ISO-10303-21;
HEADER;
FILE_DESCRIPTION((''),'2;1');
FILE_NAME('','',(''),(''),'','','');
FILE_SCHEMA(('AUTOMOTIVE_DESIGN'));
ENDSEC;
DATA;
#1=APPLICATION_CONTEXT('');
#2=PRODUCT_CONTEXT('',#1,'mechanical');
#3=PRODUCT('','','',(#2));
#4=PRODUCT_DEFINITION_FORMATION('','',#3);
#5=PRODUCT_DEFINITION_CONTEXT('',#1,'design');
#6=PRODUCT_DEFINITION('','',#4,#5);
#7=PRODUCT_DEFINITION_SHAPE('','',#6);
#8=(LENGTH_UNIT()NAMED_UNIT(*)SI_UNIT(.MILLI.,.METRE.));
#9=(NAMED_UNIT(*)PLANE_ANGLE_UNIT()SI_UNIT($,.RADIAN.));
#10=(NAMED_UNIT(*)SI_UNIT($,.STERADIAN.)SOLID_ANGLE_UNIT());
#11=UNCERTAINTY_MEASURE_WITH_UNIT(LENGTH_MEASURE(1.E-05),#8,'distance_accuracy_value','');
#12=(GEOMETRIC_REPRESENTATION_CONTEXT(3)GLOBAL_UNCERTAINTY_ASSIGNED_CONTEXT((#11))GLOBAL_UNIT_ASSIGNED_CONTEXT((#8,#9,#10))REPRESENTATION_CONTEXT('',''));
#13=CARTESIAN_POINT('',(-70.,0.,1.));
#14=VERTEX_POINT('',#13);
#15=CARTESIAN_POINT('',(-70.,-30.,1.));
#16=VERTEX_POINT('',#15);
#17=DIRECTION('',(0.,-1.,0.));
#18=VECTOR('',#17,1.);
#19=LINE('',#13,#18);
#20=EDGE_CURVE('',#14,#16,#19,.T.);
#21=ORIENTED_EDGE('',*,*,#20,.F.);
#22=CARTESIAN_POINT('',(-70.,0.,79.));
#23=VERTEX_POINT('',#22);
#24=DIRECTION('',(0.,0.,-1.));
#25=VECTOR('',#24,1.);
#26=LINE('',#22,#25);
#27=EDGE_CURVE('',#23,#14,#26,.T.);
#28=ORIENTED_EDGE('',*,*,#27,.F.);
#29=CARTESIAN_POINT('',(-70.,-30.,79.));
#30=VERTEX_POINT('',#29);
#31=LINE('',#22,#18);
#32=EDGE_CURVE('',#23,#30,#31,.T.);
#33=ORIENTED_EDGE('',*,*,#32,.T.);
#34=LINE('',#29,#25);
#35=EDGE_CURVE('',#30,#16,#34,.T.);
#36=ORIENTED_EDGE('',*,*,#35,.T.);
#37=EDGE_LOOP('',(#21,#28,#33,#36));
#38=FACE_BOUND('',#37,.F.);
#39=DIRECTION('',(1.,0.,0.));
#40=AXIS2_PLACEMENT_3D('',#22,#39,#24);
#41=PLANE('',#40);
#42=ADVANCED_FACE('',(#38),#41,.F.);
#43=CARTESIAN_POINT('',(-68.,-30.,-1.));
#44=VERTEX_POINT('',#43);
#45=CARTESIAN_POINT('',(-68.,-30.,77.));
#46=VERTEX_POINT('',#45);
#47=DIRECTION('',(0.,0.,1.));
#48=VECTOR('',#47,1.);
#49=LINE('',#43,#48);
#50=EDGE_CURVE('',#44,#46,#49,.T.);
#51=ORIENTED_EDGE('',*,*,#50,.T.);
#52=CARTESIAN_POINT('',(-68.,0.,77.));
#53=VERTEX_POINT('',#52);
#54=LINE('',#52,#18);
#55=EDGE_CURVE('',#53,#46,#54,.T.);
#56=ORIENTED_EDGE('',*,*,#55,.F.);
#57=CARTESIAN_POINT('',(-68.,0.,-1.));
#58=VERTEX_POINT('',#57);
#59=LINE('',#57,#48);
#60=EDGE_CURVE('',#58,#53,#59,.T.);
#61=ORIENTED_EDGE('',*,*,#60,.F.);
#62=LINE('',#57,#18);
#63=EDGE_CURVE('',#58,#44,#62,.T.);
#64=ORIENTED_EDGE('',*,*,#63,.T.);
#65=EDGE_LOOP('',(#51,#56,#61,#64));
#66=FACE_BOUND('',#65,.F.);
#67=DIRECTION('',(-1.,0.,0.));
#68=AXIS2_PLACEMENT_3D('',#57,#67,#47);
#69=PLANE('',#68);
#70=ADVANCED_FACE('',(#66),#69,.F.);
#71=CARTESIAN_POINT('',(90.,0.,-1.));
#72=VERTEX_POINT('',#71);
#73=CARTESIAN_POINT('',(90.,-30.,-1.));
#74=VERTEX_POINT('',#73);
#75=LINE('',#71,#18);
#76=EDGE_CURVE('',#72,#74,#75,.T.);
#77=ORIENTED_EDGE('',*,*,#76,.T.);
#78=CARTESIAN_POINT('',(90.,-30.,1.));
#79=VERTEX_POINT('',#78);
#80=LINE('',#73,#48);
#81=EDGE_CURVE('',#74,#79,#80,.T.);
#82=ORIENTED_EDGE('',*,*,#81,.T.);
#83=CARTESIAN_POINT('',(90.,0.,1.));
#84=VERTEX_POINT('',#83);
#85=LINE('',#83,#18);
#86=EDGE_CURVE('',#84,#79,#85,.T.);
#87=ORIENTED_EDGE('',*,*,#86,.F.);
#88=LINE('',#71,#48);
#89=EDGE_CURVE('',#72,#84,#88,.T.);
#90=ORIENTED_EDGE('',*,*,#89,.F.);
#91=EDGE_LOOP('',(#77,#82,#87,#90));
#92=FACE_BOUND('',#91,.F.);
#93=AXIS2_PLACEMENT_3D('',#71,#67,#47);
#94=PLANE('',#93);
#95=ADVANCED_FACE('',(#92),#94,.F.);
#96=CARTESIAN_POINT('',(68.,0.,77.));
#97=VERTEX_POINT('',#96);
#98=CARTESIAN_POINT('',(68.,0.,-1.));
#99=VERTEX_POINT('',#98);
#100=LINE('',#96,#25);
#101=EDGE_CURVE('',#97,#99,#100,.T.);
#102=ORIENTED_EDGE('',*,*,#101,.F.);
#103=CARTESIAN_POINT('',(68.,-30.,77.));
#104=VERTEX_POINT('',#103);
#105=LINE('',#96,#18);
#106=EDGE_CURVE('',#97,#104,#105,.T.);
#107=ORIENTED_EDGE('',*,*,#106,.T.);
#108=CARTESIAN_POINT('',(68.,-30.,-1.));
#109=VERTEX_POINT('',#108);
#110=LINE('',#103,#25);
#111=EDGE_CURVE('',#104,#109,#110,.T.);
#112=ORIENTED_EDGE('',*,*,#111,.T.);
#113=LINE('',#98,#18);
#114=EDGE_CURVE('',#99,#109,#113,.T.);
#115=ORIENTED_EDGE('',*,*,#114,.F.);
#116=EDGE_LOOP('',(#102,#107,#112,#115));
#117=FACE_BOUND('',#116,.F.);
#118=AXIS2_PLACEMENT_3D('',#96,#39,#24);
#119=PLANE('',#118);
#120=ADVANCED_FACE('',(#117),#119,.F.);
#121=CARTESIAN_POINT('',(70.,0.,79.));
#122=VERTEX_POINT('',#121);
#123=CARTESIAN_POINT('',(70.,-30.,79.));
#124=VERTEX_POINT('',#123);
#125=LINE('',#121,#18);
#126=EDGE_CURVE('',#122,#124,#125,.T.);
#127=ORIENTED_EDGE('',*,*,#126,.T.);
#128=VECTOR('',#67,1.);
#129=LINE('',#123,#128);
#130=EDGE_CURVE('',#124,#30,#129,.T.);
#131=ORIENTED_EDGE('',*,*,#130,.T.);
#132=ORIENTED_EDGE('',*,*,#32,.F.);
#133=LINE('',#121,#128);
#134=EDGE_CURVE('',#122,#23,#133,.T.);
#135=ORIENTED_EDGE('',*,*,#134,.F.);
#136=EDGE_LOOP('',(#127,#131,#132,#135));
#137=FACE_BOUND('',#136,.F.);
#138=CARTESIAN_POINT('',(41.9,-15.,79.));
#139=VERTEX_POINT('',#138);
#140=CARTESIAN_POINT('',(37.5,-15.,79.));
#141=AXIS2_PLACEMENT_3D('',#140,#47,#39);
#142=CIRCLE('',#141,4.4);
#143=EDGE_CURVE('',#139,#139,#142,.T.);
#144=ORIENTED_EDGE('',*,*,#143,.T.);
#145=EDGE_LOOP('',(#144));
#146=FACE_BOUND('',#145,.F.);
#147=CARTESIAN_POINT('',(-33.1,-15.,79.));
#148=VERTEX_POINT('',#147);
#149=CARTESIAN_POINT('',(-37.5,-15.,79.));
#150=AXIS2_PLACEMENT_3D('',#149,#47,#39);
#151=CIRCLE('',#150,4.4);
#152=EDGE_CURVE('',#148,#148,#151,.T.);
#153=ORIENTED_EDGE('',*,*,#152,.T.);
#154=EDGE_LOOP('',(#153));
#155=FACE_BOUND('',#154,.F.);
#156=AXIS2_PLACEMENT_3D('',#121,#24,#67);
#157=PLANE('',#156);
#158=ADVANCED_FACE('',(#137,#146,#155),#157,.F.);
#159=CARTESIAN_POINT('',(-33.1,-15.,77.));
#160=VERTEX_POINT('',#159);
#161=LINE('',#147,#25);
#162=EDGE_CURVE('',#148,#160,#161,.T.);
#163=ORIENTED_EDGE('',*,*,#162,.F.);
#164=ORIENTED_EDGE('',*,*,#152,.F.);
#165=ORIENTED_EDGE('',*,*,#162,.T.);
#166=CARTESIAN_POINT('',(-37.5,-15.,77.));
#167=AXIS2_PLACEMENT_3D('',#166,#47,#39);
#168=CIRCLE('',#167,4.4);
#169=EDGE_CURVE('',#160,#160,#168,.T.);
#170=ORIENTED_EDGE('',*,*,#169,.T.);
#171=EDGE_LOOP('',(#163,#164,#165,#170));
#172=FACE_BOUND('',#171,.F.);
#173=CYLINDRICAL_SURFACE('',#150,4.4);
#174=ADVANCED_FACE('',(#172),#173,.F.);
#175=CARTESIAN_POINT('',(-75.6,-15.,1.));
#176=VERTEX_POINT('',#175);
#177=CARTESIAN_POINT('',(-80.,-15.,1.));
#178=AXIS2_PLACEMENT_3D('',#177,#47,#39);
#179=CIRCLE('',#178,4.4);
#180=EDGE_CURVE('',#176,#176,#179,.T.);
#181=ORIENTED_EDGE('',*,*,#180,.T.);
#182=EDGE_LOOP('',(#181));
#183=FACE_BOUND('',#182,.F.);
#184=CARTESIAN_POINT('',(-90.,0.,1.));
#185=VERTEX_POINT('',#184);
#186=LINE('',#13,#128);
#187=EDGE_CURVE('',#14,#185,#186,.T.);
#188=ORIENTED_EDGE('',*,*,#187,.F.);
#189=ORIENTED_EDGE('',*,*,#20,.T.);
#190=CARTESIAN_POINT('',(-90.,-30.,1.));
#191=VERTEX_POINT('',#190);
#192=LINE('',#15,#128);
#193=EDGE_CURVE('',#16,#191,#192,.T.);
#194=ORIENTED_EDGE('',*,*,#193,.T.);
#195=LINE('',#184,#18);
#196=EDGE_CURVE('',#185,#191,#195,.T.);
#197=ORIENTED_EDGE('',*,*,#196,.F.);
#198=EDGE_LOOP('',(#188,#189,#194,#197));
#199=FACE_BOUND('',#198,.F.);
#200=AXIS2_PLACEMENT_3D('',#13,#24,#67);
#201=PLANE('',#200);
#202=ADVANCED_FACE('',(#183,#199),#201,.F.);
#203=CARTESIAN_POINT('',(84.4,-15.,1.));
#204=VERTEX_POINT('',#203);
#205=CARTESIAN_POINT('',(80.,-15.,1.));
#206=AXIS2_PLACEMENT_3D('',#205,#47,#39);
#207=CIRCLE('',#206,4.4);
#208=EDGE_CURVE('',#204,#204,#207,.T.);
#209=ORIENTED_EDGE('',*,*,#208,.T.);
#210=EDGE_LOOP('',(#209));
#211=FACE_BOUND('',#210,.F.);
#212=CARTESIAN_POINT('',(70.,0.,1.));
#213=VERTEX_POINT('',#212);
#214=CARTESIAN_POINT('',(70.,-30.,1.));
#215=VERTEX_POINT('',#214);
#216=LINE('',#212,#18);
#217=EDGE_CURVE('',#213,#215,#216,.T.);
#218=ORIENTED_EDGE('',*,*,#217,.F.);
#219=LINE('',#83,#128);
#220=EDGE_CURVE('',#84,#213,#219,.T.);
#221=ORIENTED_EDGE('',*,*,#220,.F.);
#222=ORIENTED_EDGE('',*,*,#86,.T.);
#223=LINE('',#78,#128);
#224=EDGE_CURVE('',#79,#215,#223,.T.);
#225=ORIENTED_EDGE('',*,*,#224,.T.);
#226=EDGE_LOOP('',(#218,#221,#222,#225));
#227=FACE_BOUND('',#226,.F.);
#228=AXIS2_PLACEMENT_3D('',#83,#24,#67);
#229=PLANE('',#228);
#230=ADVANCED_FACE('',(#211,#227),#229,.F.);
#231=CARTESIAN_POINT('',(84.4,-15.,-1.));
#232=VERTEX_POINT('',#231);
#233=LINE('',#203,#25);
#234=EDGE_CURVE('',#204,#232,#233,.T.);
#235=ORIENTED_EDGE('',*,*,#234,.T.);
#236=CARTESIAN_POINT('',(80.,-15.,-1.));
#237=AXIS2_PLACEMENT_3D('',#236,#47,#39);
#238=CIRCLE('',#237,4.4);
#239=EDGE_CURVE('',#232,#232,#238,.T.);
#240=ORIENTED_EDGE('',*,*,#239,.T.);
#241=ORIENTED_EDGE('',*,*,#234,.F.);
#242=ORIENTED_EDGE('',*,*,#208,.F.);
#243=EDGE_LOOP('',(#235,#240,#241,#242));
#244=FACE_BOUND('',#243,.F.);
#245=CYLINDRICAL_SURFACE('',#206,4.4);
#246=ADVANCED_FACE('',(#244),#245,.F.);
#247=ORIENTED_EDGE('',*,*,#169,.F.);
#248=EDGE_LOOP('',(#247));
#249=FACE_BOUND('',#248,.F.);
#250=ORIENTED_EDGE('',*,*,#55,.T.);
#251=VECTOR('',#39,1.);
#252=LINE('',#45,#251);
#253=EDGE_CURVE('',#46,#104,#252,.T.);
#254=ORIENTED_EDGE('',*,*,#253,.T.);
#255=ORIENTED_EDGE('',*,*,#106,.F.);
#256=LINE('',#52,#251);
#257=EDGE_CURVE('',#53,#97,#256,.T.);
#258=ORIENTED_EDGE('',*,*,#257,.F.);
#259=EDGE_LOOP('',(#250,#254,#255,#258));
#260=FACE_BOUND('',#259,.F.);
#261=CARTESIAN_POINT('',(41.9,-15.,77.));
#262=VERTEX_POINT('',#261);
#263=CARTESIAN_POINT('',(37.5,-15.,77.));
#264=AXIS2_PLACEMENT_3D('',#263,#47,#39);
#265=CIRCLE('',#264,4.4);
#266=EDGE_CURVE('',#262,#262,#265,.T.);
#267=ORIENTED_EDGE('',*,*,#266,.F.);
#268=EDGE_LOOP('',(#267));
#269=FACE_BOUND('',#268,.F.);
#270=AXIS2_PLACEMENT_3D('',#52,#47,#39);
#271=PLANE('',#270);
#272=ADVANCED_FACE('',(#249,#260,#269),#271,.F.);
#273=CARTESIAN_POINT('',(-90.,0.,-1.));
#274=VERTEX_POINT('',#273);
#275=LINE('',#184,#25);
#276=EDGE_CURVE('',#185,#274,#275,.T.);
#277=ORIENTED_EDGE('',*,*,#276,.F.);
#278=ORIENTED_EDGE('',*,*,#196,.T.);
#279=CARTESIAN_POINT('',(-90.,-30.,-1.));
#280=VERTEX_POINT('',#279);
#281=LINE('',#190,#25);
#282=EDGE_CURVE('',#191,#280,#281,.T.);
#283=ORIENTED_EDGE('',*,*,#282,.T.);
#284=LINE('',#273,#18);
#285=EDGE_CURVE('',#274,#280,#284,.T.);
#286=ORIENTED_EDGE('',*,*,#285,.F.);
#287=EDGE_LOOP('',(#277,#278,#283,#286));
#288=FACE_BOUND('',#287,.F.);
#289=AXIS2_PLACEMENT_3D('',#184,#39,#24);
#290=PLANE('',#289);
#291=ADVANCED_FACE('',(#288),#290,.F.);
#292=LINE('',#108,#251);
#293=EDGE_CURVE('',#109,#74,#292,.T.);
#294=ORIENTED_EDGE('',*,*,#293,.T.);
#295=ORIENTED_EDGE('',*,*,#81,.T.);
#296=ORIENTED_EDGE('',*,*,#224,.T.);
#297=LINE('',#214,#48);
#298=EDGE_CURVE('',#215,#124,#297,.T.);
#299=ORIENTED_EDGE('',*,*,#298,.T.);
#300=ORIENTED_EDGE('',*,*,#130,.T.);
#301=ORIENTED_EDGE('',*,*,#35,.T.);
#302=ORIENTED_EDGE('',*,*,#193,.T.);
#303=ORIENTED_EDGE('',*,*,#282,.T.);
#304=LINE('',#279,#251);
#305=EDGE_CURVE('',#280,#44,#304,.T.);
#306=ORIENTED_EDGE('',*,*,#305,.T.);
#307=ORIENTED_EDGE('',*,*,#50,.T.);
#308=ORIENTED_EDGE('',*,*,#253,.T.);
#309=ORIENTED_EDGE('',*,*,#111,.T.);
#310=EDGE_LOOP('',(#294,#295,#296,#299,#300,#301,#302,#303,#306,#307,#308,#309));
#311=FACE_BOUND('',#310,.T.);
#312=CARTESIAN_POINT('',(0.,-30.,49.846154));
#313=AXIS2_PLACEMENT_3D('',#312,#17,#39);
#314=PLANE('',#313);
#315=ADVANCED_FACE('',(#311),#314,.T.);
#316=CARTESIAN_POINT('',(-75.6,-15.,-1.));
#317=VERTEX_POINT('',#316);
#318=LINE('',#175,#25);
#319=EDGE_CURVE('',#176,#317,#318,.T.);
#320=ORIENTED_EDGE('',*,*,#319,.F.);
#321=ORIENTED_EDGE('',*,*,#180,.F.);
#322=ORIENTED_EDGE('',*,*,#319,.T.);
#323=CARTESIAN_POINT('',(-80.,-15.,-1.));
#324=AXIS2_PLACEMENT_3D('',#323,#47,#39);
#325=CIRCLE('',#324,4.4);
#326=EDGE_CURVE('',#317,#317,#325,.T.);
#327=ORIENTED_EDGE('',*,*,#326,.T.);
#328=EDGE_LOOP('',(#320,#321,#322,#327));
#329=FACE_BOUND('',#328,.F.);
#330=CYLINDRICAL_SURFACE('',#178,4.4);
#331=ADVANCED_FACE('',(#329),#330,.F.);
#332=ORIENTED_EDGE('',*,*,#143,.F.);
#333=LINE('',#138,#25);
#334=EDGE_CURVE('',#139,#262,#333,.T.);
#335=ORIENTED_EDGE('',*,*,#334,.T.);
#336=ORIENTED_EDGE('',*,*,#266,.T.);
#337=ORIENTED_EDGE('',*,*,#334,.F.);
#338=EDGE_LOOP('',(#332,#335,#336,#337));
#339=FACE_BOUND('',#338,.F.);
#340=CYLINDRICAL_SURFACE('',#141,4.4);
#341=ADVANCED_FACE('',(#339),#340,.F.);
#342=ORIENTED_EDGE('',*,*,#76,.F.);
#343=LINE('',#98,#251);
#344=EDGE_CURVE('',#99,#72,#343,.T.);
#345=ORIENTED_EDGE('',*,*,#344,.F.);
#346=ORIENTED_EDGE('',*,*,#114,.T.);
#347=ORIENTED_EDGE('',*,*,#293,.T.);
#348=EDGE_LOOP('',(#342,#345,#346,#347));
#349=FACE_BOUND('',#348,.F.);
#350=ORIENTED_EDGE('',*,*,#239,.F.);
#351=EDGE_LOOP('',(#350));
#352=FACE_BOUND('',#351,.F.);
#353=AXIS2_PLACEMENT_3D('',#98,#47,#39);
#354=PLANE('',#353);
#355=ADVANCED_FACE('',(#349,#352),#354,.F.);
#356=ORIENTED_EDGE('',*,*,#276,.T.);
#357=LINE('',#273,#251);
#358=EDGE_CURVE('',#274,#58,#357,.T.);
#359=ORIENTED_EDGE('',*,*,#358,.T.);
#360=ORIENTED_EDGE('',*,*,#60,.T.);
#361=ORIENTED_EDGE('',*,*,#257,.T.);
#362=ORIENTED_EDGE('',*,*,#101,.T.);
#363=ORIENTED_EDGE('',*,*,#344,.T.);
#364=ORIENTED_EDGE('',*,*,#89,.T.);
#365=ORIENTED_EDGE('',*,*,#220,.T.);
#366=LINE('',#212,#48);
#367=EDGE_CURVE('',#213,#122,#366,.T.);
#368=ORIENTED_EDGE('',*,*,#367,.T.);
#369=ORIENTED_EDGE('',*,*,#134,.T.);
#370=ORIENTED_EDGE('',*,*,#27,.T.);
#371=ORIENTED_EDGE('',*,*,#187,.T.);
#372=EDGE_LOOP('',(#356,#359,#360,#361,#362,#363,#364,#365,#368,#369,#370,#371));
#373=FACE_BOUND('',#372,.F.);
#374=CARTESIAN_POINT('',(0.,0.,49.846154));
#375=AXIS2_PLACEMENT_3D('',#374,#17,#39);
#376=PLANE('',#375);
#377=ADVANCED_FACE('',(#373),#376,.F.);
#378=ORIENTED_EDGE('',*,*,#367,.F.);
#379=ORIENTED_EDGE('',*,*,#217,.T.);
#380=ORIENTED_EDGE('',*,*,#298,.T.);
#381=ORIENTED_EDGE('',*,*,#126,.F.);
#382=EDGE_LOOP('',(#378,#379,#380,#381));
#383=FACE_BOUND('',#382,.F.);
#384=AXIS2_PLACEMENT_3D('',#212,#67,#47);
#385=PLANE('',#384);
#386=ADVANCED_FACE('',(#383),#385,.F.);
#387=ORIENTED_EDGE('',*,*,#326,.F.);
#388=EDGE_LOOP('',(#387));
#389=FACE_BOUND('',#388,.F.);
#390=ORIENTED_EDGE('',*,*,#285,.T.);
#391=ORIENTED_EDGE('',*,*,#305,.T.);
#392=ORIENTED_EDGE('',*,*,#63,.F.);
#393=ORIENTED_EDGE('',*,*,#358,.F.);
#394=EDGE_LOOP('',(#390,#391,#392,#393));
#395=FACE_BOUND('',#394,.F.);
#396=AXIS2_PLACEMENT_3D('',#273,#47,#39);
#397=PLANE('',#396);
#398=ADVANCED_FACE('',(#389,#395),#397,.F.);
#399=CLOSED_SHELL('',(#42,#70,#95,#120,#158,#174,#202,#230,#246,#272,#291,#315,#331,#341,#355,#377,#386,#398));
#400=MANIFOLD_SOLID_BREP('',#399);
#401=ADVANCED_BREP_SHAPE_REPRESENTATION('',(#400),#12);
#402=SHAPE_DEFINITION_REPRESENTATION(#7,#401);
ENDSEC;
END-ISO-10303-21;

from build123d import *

# Parameters (mm, degrees)
F1_DEPTH = 30
F2_R     = 4.4
F3_R     = 4.4
F4_DEPTH = 25


# Not quite as in the source:
# - a feature names something its author has since deleted; it is built from what else it names


with BuildPart() as f1:
    # F0 (on Front) → F1 (new body)
    with BuildSketch(Plane.XZ):
        Polygon((90, -1), (90, 1), (70, 1), (70, 79), (-70, 79), (-70, 1), (-90, 1), (-90, -1), (-68, -1), (-68, 77), (68, 77), (68, -1), align=None)
    extrude(amount=F1_DEPTH)

    # F2 (on face) + F3 (on face) → F4 (cut)
    with BuildSketch(Plane.XY.offset(1)):
        with Locations((-80, -15)):
            Circle(F2_R)
        with Locations((80, -15)):
            Circle(F2_R)
    with BuildSketch(Plane.XY.offset(79)):
        with Locations((-37.5, -15)):
            Circle(F3_R)
        with Locations((37.5, -15)):
            Circle(F3_R)
    extrude(amount=-F4_DEPTH, mode=Mode.SUBTRACT)


solid = f1.part
